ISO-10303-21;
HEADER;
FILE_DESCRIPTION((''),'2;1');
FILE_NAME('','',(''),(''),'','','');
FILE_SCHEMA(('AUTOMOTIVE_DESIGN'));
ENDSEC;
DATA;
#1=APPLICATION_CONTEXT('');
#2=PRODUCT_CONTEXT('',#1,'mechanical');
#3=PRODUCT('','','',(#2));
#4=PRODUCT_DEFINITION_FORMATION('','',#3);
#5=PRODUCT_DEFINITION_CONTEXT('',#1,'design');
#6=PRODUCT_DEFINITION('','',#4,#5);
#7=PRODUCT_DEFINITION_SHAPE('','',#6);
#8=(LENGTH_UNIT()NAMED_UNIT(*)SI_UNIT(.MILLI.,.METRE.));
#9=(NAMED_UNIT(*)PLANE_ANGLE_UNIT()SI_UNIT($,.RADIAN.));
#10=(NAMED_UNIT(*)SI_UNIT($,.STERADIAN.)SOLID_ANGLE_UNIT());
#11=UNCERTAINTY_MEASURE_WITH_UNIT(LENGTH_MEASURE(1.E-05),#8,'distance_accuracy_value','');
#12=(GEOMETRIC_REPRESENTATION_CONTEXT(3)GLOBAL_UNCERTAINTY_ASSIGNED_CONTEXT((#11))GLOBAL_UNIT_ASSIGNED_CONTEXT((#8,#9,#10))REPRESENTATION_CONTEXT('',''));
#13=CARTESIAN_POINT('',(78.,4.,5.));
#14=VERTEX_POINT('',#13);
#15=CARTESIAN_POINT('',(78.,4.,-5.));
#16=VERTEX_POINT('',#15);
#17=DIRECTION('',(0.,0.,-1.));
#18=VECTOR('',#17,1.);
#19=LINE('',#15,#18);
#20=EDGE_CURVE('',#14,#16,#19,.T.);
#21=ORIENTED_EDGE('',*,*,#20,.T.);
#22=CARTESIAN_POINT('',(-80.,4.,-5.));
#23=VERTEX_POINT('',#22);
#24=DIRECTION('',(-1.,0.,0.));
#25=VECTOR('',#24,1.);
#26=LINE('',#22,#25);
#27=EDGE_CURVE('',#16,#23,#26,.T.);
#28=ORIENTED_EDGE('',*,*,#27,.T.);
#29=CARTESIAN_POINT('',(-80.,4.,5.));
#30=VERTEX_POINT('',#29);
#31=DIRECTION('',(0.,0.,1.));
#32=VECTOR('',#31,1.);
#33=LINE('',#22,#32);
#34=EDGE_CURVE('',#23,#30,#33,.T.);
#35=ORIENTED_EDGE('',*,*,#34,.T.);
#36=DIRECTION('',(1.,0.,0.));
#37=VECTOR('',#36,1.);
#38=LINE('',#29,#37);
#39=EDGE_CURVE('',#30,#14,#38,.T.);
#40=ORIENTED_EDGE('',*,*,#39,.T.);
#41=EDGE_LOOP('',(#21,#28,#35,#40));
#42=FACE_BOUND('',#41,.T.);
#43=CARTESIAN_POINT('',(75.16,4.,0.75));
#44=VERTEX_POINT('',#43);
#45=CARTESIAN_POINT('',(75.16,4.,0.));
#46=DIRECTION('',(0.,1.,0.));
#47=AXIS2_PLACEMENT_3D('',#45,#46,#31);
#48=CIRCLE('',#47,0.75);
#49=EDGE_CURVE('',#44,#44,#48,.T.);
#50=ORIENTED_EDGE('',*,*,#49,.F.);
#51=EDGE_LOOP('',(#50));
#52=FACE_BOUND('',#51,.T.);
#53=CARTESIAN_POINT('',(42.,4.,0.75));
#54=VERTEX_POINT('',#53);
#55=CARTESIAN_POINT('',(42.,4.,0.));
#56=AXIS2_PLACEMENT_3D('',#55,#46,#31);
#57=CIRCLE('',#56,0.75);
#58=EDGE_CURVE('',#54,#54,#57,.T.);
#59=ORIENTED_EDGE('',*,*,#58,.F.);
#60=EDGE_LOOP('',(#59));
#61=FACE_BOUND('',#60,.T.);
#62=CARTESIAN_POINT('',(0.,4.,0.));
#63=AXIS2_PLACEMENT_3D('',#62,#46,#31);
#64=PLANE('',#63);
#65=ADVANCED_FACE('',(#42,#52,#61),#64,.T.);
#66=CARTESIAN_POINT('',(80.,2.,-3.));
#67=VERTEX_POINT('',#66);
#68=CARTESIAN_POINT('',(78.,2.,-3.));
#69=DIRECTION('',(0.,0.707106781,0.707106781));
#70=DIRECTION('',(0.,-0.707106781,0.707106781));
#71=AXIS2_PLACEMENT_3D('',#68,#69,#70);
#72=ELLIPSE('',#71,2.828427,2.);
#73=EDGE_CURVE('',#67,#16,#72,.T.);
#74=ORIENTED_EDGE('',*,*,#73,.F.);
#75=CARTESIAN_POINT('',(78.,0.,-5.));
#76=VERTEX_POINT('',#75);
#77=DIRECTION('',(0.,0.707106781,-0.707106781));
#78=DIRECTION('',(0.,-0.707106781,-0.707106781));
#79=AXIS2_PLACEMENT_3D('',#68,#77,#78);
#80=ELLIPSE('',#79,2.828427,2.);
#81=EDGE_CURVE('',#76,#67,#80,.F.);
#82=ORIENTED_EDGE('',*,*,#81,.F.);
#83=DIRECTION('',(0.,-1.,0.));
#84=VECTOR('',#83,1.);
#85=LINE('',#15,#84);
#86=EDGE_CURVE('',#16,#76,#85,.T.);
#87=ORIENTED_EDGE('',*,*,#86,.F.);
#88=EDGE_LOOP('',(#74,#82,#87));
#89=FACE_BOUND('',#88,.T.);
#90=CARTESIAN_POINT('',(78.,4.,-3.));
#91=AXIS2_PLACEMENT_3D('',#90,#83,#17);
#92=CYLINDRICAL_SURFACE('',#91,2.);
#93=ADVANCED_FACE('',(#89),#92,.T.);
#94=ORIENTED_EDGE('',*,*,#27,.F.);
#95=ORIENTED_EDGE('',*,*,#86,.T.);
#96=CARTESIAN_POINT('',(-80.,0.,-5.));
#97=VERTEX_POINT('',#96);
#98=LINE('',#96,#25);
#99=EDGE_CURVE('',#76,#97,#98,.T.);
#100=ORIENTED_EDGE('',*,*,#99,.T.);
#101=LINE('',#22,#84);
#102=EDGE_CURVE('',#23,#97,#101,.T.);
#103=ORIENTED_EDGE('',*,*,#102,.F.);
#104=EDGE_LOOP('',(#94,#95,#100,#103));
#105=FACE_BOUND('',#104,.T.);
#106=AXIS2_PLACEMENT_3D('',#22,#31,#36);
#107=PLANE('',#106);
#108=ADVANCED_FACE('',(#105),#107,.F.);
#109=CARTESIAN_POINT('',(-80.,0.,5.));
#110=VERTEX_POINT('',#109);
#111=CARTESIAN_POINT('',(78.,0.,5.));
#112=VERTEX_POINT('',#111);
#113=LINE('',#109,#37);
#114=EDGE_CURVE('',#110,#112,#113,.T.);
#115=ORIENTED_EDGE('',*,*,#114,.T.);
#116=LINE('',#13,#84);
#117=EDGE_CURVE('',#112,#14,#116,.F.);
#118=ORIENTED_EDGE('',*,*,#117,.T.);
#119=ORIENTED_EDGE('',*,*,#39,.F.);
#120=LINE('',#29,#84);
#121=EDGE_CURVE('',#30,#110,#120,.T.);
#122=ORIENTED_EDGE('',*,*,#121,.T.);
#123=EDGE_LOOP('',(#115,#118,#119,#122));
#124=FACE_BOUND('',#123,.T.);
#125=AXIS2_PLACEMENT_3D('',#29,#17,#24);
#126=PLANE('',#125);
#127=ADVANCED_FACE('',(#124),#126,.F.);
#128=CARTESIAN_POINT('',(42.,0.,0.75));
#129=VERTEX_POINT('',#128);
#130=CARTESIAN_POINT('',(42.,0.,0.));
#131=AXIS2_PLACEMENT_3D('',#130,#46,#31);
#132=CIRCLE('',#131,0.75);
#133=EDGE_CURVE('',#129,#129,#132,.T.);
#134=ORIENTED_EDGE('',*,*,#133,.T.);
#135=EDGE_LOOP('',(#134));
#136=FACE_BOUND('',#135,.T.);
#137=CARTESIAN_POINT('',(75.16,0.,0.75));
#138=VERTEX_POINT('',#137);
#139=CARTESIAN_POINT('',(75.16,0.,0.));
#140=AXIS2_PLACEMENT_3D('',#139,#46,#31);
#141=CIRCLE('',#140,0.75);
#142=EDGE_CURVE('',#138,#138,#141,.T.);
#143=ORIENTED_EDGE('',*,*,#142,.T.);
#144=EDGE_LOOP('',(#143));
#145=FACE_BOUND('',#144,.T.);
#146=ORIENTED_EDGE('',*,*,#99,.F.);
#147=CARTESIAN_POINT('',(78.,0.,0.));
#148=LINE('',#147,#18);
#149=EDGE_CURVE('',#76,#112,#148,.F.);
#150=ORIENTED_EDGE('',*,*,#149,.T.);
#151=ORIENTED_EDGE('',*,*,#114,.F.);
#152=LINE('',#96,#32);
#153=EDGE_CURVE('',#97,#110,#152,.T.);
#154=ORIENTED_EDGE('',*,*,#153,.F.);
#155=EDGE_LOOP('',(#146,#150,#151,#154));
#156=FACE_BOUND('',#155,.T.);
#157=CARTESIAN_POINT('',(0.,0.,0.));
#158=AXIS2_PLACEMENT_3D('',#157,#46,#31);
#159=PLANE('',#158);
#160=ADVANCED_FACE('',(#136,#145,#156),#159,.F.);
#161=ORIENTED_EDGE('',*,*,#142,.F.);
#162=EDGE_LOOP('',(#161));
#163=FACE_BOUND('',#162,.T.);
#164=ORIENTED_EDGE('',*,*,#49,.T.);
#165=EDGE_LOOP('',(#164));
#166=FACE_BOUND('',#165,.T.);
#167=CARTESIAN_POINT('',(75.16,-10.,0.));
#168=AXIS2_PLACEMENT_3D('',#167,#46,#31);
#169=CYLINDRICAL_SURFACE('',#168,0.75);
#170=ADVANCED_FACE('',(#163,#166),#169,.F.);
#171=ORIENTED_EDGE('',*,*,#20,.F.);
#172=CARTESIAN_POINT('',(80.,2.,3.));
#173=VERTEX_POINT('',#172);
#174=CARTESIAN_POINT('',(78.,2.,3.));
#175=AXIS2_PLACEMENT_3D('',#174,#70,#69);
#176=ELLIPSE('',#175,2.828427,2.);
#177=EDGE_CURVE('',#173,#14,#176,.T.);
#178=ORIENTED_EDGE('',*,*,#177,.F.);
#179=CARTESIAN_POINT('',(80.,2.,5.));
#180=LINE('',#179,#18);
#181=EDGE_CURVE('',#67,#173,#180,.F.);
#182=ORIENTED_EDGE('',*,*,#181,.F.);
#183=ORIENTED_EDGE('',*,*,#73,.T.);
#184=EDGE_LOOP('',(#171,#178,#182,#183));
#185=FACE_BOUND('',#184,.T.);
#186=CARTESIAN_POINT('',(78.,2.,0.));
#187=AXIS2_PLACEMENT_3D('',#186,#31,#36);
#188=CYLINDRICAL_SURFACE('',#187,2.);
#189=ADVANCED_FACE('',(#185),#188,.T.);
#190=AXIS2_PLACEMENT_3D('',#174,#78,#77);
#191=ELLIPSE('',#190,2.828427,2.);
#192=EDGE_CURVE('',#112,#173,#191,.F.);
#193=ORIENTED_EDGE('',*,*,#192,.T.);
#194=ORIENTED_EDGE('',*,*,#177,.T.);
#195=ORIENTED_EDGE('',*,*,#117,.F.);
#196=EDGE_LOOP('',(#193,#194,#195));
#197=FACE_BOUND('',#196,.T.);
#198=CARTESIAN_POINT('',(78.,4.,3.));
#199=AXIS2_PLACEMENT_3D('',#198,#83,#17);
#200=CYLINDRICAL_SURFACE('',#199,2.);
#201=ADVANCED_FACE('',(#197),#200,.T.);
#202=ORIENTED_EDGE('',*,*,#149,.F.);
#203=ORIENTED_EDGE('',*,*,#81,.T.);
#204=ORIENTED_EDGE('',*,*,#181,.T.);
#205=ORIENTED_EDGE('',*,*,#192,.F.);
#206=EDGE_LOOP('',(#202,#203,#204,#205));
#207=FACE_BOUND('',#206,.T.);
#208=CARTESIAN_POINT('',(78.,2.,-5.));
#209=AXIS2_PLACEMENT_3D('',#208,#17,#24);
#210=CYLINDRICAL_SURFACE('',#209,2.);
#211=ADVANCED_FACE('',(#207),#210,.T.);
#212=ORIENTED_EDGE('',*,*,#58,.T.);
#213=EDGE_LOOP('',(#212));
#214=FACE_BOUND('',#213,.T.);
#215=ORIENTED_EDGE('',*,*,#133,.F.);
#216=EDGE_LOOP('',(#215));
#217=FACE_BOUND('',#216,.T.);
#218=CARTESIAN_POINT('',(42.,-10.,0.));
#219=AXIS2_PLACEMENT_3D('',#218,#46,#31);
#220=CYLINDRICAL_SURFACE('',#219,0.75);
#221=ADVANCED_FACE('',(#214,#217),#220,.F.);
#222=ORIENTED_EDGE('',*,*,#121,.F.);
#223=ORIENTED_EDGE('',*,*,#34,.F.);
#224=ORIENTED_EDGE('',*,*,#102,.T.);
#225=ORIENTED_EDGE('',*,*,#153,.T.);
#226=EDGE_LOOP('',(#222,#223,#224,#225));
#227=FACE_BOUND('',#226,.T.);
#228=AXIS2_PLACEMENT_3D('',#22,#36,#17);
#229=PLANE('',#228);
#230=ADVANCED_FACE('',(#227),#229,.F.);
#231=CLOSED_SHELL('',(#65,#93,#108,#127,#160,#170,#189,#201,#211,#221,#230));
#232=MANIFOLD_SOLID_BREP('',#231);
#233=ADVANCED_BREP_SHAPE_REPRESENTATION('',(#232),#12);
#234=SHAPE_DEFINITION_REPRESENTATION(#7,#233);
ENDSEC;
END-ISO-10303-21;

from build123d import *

# Parameters (mm, degrees)
SKETCH_2_W          = 160
SKETCH_2_H          = 10
EXTRUDE_1_DEPTH     = 4
SKETCH_3_R          = 0.75
CUT_EXTRUDE_1_DEPTH = 14
FILLET_1_R          = 2


with BuildPart() as part:
    # Эскиз2 → Бобышка-Вытянуть1 (new body)
    with BuildSketch(Plane(origin=(0, 0, 0), x_dir=(1, 0, 0), z_dir=(0, 1, 0))):
        Rectangle(SKETCH_2_W, SKETCH_2_H)
    extrude(amount=EXTRUDE_1_DEPTH)

    # Эскиз3 → Вырез-Вытянуть1 (cut)
    with BuildSketch(Plane(origin=(0, 4, 0), x_dir=(1, 0, 0), z_dir=(0, 1, 0))):
        with Locations(Location((75.16, 0, 0), (0, 0, 270))):
            Circle(SKETCH_3_R)
        with Locations(Location((42, 0, 0), (0, 0, 270))):
            Circle(SKETCH_3_R)
    extrude(amount=-CUT_EXTRUDE_1_DEPTH, mode=Mode.SUBTRACT)

    # Скругление1
    fillet_1_edges = [part.edges().sort_by_distance(p)[0] for p in [
        (80, 4, 0),
        (80, 0, 0),
        (80, 2, 5),
        (80, 2, -5),
    ]]
    fillet(fillet_1_edges, radius=FILLET_1_R - 0.0001)  # a hair under: the kernel refuses the full size


solid = part.part
